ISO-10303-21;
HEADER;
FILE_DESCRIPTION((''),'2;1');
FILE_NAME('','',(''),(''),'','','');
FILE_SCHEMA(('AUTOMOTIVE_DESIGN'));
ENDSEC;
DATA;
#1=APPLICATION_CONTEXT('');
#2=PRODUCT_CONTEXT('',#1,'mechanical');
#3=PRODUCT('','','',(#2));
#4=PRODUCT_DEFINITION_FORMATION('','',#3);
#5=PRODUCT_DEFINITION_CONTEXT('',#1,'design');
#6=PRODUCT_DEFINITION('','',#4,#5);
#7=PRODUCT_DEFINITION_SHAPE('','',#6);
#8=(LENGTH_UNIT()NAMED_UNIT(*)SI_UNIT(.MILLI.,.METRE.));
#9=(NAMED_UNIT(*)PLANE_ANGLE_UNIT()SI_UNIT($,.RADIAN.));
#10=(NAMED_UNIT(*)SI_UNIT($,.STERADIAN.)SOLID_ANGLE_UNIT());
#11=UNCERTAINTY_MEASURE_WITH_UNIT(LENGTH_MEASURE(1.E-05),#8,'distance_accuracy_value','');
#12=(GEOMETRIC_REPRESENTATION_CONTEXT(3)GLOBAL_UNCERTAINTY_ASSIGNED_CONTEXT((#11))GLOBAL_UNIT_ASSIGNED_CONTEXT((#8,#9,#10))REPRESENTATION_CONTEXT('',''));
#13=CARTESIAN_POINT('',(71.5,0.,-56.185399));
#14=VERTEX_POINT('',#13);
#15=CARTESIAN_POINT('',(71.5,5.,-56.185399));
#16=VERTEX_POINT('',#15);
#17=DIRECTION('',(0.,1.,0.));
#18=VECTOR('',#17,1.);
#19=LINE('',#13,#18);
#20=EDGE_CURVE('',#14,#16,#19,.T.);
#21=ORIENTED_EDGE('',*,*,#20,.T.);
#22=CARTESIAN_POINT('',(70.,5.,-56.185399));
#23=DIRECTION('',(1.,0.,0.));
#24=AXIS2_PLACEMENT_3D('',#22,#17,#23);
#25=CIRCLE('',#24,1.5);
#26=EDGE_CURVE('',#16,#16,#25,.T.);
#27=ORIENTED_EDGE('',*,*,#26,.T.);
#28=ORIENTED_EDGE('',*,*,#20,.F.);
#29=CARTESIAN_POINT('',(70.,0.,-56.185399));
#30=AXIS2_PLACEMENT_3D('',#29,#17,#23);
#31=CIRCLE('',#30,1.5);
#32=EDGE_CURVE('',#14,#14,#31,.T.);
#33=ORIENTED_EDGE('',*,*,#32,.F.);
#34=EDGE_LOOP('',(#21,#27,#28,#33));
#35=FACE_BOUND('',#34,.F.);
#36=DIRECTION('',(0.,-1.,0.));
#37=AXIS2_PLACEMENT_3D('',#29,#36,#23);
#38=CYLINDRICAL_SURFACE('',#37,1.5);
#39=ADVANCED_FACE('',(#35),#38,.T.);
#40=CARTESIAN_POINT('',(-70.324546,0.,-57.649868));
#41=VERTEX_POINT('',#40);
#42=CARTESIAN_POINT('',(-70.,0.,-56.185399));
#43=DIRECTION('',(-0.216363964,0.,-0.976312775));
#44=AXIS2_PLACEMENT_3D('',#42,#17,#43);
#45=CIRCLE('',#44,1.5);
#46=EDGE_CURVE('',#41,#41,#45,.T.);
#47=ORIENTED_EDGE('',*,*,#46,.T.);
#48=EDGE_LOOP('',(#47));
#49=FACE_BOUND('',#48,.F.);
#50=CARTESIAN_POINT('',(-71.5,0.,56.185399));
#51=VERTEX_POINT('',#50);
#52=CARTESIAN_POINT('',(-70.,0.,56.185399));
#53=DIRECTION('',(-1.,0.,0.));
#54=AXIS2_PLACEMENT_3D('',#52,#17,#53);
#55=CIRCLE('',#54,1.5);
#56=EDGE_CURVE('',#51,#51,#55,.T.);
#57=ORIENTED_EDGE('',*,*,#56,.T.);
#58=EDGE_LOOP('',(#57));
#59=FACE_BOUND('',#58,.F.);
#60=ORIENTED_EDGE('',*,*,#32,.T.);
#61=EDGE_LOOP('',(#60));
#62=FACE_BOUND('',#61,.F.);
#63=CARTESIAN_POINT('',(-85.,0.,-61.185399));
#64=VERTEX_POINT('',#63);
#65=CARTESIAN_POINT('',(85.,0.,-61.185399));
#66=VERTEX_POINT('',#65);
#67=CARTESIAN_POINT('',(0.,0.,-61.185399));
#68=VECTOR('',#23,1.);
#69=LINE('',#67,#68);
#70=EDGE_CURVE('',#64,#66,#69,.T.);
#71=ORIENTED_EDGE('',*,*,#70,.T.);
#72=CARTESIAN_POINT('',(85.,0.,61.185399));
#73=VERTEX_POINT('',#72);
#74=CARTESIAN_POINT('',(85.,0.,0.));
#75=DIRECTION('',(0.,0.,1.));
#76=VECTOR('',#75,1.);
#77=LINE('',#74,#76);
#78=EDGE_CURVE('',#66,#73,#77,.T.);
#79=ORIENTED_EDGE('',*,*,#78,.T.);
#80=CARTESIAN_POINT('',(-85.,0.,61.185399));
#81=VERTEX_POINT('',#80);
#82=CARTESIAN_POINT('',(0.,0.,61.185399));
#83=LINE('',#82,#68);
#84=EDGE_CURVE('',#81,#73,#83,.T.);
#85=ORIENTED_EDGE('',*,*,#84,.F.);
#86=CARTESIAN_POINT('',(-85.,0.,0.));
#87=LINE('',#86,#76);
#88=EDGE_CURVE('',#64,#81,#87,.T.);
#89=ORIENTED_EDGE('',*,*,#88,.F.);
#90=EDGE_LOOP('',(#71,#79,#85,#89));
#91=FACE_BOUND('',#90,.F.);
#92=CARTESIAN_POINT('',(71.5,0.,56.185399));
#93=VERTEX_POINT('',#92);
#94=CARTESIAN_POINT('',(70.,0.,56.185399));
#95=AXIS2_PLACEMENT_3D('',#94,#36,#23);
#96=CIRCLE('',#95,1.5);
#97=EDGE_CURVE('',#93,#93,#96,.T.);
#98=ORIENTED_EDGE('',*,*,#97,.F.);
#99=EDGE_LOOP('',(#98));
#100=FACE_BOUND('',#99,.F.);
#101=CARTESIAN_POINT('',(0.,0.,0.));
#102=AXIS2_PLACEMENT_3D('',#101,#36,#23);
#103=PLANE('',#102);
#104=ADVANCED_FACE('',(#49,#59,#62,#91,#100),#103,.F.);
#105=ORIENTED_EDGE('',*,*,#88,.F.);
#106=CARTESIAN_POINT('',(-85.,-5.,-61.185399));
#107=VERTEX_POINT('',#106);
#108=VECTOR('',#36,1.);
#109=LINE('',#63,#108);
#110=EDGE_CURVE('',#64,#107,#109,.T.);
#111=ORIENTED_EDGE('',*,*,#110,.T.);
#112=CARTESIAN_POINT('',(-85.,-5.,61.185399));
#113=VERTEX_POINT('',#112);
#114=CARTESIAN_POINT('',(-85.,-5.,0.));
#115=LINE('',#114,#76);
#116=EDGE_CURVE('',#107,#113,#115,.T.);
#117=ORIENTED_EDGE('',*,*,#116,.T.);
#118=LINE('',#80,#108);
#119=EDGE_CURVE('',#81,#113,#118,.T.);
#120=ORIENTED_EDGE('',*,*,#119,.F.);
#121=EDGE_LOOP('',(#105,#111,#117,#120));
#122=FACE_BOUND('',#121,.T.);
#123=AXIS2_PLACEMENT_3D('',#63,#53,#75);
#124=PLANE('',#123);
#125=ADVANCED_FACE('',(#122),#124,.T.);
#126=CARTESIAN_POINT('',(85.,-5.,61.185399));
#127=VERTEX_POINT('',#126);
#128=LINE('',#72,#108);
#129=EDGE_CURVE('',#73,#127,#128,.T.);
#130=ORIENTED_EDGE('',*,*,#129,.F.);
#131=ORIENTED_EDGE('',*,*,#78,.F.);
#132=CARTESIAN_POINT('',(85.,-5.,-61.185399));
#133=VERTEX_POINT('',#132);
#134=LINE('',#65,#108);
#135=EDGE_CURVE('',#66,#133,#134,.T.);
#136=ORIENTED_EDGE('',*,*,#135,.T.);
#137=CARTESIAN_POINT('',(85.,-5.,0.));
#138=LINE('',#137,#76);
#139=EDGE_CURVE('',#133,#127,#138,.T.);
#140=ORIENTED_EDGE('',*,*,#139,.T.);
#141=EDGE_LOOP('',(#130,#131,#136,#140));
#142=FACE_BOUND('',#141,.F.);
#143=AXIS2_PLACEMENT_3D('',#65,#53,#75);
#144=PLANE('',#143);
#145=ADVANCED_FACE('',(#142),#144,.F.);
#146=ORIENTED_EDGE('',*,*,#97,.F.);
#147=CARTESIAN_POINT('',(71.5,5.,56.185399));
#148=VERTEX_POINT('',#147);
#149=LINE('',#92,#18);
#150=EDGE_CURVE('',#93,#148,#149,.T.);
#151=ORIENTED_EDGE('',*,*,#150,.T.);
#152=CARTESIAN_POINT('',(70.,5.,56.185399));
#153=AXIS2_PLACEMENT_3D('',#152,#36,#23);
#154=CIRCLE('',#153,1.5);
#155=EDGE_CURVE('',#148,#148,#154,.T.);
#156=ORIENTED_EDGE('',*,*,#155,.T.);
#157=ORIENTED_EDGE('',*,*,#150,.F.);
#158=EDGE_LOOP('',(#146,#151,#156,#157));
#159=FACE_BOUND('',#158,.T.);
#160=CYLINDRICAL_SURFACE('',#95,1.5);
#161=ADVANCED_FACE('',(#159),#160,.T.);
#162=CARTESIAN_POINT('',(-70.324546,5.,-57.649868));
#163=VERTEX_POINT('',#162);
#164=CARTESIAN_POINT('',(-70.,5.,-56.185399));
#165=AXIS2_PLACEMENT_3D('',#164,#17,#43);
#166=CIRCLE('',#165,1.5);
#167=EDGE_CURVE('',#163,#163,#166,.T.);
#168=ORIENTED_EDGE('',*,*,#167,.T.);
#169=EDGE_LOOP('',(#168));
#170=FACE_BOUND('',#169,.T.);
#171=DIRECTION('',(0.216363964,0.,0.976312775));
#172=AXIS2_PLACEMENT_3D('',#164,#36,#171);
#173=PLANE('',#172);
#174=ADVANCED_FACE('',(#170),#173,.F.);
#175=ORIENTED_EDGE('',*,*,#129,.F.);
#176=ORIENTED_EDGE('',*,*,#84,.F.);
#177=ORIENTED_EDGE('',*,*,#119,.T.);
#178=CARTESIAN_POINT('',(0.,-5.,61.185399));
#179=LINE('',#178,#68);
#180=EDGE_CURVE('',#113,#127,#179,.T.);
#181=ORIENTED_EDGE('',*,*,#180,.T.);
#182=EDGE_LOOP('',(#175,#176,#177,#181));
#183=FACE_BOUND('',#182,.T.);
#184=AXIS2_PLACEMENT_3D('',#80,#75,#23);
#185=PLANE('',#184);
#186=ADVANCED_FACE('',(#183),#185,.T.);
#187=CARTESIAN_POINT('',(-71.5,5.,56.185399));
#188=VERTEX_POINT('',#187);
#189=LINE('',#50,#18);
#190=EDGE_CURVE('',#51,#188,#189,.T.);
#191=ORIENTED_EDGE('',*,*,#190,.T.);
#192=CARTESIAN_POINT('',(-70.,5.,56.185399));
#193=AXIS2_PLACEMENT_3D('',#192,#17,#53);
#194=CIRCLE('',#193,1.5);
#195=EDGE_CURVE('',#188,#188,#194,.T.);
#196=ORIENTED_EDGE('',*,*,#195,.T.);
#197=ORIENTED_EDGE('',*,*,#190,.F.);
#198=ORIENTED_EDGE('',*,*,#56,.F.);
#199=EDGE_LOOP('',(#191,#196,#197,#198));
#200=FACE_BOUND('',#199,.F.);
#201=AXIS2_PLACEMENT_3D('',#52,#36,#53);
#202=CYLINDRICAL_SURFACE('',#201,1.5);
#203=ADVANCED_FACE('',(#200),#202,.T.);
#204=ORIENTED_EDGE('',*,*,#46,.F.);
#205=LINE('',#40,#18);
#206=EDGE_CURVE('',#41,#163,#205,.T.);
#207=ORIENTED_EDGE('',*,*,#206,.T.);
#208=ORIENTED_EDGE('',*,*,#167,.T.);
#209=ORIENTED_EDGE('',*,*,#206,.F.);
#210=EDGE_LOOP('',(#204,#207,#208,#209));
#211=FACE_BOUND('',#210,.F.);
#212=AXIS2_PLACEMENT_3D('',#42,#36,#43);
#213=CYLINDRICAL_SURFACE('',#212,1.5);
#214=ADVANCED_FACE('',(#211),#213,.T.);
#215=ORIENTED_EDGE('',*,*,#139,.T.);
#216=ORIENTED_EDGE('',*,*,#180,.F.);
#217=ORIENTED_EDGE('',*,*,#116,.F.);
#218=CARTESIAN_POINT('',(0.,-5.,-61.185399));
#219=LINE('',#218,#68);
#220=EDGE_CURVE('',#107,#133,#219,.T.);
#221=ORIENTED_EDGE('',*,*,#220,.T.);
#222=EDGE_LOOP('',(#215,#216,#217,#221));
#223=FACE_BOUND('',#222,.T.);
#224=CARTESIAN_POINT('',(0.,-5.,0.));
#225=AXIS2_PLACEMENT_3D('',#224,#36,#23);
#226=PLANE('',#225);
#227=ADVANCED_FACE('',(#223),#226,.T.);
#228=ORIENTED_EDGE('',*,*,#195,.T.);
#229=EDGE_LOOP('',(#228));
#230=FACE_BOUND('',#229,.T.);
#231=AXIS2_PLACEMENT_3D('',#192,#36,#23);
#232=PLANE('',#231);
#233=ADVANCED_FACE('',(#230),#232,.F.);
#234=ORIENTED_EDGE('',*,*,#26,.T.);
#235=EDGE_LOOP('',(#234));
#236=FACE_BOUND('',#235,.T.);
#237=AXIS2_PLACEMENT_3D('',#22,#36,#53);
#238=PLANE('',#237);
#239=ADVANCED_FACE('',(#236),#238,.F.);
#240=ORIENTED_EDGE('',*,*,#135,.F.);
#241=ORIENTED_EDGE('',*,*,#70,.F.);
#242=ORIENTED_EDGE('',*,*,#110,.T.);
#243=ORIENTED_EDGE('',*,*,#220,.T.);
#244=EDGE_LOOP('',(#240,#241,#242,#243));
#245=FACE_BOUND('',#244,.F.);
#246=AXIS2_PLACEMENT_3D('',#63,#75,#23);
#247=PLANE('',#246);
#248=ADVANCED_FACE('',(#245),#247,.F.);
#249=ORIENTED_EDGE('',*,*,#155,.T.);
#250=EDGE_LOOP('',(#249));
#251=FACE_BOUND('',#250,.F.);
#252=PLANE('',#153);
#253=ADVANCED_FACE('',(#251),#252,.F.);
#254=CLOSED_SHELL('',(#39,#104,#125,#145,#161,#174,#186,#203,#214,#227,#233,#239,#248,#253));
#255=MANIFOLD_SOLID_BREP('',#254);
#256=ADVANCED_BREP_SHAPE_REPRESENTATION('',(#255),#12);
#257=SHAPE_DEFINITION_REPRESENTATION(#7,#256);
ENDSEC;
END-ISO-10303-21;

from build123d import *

# Parameters (mm, degrees)
F0_W     = 170
F0_H     = 122.3707973333
F1_DEPTH = 5
F2_R     = 1.5
F3_DEPTH = 5


# Not quite as in the source:
# - a pattern or mirror of a feature is missing from the dataset's text; its kind, count and spacing are read off the source's solid


with BuildPart() as f1:
    # F0 (on Front) → F1 (new body)
    with BuildSketch(Plane.XZ):
        Rectangle(F0_W, F0_H)
    extrude(amount=F1_DEPTH)

    # F2 (on Front) → F3 (join)
    with BuildSketch(Plane.XZ):
        with Locations((70, 56.1853986666)):
            Circle(F2_R)
    f3 = extrude(amount=-F3_DEPTH)

    # F3_copies: F3 across plane
    add(f3.mirror(Plane(origin=(0, 0, 0), x_dir=(0, 0, -1), z_dir=(-1, 0, 0))))

    # F3_copies1: F3 across plane
    add(f3.mirror(Plane(origin=(0, 0, 0), x_dir=(-1, 0, 0), z_dir=(0, 0, -1))))

    # F3_copies2: F3 across plane
    add(f3.mirror(Plane(origin=(0, 0, 0), x_dir=(0.6259536866, 0, -0.7798602325), z_dir=(-0.7798602325, 0, -0.6259536866))))


solid = f1.part
